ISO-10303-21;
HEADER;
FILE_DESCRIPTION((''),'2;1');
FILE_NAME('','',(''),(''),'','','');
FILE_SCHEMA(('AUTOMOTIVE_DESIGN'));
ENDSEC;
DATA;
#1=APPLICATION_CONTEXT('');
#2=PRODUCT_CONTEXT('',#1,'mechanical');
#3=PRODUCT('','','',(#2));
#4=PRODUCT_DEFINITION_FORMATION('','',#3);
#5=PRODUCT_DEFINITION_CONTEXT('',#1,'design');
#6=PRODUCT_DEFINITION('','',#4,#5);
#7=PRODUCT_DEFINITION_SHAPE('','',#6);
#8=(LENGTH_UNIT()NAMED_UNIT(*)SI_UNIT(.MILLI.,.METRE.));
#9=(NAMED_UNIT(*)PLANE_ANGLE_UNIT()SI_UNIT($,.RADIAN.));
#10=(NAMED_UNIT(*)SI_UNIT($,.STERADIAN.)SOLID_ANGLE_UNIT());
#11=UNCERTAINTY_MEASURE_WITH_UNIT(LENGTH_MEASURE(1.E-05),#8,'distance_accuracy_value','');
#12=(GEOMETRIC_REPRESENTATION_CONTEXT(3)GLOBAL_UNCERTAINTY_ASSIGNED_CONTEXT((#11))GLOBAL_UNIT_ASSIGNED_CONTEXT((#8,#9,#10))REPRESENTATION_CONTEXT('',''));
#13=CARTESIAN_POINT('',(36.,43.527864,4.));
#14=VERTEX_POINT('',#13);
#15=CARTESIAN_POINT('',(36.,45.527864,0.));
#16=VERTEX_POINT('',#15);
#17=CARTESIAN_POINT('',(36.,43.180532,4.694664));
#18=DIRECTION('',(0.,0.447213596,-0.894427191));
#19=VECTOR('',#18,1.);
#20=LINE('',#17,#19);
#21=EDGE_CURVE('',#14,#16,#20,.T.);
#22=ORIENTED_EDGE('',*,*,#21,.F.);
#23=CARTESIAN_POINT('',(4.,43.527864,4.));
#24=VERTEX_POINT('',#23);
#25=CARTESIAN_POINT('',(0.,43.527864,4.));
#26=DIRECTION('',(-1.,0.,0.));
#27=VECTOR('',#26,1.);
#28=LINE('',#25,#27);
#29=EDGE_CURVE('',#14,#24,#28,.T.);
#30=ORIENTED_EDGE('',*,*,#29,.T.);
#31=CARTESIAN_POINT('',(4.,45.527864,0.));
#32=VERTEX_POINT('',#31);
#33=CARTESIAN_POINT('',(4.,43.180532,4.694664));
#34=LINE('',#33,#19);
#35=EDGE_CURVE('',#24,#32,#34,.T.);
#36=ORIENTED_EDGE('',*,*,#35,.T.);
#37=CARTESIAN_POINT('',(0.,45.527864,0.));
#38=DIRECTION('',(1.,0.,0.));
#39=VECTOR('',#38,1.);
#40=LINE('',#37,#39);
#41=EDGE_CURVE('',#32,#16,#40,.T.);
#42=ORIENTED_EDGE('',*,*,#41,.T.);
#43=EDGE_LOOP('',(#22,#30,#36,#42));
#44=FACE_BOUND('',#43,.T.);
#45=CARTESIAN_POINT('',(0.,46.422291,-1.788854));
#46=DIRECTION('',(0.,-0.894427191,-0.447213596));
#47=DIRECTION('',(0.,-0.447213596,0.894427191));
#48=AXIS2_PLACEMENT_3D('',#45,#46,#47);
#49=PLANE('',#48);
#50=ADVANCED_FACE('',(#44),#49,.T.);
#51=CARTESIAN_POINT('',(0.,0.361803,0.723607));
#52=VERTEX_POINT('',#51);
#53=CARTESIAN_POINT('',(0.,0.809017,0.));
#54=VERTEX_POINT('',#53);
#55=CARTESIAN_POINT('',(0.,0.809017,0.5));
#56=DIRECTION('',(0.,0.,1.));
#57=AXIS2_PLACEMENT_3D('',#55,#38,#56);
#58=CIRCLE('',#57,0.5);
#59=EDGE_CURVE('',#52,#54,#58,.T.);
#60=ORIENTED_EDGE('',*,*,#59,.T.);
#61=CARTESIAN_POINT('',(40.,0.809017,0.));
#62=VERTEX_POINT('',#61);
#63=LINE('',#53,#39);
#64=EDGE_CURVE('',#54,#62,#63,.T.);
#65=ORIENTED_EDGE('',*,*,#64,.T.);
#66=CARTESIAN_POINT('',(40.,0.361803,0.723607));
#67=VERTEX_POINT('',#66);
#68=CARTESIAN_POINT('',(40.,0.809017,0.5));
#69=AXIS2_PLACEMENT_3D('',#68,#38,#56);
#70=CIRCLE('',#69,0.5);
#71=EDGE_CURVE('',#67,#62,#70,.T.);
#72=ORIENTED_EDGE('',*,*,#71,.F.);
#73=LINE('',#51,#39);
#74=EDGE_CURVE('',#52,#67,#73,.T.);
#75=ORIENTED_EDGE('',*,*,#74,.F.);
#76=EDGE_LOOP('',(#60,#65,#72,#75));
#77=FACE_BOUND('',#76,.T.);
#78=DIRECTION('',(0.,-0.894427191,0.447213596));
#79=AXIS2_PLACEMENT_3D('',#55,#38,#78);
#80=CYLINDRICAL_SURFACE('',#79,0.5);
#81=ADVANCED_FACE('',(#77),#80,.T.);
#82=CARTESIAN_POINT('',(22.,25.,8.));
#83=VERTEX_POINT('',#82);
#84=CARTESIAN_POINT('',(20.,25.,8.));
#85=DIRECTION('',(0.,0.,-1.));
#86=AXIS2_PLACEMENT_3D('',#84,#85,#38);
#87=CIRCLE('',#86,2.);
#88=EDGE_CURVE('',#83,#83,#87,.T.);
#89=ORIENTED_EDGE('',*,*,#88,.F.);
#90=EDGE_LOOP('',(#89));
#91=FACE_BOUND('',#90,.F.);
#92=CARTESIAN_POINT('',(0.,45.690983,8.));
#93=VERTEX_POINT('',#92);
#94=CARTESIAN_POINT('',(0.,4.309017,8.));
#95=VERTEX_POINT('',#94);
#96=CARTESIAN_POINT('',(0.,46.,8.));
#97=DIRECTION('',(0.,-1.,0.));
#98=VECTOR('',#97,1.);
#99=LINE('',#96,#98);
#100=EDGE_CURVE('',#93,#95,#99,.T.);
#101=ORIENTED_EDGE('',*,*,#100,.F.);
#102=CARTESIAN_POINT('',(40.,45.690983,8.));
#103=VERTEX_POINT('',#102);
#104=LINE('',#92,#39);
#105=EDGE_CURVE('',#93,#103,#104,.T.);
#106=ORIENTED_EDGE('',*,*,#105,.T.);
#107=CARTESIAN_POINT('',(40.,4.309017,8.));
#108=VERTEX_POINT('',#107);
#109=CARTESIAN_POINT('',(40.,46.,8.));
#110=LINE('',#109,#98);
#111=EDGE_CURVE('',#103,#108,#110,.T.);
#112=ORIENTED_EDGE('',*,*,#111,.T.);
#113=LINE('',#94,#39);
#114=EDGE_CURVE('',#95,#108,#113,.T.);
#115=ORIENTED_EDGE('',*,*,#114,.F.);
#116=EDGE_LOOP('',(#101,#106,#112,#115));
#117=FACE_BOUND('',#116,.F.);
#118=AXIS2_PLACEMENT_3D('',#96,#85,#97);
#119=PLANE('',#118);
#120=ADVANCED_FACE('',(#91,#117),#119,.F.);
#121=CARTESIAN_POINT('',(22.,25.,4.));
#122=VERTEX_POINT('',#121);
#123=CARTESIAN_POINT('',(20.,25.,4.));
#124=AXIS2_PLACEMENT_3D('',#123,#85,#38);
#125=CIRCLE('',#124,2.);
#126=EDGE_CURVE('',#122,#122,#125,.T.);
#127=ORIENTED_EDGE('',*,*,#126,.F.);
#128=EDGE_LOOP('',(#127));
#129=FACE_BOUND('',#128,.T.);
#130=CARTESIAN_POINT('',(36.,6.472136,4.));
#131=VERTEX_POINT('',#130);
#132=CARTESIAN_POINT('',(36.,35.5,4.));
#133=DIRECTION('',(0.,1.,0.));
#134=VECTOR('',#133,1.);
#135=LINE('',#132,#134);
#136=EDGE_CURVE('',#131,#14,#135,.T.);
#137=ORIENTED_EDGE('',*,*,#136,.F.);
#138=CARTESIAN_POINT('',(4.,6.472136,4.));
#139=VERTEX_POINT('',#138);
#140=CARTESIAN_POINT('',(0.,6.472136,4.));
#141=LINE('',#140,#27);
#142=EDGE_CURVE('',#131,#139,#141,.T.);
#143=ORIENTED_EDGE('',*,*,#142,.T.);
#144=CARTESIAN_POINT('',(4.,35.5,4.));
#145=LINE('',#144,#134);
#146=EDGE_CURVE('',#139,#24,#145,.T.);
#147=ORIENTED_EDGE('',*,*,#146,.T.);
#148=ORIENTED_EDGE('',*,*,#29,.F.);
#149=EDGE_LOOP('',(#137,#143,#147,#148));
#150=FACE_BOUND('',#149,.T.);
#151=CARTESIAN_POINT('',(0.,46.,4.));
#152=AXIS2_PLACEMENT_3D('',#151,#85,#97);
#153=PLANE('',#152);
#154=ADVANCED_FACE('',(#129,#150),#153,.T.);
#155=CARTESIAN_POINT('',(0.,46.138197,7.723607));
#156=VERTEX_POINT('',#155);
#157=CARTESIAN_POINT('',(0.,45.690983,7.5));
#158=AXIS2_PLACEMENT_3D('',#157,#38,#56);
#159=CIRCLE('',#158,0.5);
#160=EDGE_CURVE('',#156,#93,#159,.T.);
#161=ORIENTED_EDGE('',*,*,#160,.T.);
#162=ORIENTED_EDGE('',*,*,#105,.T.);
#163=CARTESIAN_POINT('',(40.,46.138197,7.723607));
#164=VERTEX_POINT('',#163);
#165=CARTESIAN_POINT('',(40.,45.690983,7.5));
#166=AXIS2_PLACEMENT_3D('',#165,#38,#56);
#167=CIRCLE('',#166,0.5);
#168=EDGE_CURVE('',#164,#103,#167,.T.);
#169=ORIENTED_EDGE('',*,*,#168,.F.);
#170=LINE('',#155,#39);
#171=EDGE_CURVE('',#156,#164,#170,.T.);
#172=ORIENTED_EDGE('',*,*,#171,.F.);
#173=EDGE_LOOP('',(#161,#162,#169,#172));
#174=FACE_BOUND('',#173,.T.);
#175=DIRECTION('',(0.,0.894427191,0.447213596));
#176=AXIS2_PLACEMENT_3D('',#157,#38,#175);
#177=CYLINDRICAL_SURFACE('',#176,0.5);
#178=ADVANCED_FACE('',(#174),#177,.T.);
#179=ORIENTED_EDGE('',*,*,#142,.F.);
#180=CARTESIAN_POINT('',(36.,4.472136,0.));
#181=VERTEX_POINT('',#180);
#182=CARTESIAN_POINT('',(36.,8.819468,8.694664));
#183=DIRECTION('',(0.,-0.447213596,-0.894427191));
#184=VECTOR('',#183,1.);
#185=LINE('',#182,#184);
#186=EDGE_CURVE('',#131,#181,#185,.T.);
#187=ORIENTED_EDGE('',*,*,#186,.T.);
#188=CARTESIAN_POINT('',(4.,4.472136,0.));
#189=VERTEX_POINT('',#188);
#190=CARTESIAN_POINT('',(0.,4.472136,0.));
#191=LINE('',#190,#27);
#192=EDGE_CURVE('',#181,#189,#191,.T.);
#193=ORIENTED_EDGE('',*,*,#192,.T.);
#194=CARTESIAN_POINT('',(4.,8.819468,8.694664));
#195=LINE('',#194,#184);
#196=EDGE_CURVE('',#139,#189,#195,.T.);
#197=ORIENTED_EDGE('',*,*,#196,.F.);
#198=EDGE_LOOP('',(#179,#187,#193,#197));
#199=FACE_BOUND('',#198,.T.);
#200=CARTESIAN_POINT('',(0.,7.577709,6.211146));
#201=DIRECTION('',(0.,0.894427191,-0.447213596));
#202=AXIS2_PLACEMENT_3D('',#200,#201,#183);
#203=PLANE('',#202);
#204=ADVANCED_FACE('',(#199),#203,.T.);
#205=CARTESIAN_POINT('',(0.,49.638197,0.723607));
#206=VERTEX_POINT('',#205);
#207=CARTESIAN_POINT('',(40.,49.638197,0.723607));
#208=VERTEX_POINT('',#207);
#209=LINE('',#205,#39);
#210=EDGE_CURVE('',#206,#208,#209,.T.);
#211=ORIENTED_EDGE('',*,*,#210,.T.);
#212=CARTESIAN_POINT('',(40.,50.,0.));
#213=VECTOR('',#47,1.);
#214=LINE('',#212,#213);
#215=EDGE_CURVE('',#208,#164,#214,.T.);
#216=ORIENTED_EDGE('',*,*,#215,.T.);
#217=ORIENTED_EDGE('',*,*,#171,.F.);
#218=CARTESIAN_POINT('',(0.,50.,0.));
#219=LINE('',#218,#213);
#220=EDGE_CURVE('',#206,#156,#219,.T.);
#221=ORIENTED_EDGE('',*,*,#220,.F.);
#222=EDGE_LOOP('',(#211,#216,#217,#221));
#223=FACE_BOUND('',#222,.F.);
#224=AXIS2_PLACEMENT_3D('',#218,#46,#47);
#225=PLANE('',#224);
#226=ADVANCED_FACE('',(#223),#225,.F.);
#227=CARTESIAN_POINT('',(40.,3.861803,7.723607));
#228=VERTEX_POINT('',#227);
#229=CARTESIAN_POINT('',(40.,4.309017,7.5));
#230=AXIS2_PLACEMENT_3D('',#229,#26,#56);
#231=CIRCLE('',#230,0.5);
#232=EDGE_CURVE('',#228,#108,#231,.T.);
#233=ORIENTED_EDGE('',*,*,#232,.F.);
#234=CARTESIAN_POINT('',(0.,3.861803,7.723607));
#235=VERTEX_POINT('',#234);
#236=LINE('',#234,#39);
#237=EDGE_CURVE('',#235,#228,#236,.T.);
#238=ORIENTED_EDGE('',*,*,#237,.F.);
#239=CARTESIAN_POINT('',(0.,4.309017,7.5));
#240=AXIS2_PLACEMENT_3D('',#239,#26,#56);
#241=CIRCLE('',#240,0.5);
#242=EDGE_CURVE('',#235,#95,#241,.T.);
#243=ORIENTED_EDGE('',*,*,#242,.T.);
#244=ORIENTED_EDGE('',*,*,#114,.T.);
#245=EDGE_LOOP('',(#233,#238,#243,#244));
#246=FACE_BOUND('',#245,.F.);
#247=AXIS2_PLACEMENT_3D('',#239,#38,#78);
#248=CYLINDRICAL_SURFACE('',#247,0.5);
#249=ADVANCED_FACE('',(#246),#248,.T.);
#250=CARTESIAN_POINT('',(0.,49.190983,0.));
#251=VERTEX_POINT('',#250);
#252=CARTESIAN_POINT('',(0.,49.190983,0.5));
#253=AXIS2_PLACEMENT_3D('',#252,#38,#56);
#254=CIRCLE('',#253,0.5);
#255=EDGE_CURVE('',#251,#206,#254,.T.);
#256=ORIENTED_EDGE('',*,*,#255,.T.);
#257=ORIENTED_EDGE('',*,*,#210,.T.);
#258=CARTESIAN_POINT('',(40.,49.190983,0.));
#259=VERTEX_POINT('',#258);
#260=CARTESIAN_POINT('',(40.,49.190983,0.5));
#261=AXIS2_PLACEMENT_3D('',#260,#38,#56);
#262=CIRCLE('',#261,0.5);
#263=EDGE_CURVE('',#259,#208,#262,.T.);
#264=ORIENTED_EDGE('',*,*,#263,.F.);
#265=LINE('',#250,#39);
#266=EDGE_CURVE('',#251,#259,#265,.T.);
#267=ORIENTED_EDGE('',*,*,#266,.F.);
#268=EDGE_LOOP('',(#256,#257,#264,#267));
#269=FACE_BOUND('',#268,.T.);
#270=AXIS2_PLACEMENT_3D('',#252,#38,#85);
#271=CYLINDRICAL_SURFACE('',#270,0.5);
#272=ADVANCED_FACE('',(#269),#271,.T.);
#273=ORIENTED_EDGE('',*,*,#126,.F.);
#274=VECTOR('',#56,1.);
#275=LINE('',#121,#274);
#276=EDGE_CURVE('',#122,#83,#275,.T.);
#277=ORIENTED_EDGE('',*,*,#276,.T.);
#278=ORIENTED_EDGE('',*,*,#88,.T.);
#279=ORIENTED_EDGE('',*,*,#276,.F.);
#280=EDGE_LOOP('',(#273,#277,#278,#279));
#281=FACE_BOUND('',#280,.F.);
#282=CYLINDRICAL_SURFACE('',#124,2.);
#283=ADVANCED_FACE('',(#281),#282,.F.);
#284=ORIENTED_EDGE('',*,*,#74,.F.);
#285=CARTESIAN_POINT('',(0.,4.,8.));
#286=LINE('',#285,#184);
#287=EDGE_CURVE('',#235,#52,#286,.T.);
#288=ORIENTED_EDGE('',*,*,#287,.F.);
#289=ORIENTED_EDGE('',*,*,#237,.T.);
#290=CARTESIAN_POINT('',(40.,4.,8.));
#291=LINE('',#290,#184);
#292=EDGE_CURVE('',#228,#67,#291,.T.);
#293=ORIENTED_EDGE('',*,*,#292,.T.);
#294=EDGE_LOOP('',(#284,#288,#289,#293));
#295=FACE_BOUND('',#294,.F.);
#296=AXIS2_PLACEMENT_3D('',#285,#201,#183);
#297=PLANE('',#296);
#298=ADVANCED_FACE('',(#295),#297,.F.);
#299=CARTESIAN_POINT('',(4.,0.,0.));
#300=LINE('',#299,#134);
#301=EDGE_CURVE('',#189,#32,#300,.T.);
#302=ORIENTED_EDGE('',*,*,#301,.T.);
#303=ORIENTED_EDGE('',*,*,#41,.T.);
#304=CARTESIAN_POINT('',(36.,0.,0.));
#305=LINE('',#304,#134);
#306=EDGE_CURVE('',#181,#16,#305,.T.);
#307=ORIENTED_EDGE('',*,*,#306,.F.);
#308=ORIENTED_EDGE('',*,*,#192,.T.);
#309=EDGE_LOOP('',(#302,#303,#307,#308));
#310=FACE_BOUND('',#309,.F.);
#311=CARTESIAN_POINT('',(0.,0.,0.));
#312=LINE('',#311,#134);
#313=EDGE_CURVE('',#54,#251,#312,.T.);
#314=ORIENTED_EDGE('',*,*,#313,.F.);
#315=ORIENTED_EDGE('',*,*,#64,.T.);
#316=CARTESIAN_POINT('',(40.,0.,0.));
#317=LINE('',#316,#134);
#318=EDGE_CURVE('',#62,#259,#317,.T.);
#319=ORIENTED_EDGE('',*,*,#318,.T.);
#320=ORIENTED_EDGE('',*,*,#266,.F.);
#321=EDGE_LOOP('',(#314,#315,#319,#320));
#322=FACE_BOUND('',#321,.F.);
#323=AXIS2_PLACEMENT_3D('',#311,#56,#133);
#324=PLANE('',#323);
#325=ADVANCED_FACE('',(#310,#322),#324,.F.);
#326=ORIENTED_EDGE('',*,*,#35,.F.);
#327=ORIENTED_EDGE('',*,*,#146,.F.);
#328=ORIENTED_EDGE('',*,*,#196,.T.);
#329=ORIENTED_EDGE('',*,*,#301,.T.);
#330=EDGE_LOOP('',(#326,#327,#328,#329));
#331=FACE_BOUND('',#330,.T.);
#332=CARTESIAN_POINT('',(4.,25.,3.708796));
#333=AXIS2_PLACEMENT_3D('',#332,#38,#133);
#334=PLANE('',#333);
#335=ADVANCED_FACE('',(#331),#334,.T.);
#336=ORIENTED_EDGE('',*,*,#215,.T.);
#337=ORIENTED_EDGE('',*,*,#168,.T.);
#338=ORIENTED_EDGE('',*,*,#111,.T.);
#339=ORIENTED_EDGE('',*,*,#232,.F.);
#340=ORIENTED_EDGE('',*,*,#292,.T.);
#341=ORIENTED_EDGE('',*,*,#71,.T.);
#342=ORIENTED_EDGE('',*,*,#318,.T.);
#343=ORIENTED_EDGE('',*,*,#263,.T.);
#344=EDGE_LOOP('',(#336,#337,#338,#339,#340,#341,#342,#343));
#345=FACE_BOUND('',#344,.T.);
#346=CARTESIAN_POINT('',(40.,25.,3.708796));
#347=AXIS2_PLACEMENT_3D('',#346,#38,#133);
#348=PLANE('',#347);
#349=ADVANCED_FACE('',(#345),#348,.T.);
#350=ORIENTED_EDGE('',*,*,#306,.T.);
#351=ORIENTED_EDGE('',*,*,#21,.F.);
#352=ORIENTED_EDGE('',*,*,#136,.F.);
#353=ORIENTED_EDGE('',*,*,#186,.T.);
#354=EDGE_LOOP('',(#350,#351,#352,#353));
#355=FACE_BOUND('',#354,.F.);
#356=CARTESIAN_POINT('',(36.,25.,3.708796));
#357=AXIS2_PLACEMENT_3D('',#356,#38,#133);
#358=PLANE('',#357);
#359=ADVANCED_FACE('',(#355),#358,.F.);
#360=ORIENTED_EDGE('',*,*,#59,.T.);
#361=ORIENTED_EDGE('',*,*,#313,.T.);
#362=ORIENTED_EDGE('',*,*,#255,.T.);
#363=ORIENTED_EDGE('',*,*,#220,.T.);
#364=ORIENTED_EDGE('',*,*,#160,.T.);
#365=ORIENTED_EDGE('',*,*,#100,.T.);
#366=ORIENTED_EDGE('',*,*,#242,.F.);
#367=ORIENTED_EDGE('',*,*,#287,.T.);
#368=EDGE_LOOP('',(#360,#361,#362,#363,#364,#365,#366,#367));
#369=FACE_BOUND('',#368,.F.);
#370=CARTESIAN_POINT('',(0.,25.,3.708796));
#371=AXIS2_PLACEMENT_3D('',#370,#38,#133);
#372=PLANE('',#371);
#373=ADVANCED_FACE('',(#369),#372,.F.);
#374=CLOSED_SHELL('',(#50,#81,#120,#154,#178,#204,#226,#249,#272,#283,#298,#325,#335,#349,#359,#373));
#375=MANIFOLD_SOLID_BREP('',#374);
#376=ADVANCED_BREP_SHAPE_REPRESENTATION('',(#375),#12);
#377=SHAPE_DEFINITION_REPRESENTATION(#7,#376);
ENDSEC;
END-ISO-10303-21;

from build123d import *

# Parameters (mm, degrees)
F1_DEPTH = 40
F2_R     = 0.5
F3_T     = 4
F4_R     = 2
F5_DEPTH = 4


# Not quite as in the source:
# - a shell that OpenCascade refuses in one call is made with other operations: the cavity is built on its own and cut out


with BuildPart() as f1:
    # F0 (on Right) → F1 (new body)
    with BuildSketch(Plane.YZ):
        Polygon((4, 8), (0, 0), (50, 0), (46, 8), align=None)
    extrude(amount=F1_DEPTH)

    # F2
    f2_edges = [f1.edges().sort_by_distance(p)[0] for p in [
        (20, 4, 8),
        (20, 46, 8),
        (20, 0, 0),
        (20, 50, 0),
    ]]
    fillet(f2_edges, radius=F2_R)

    # F3: shell of thickness 4, made by hand


with BuildPart() as f3_core1:
    # F3_t2: copy of F1
    add(f1.part)

    # the walls: a layer under each face that stays
    f3_faces = [f3_core1.faces().sort_by_distance(p)[0] for p in [
        (20, 2.1118033989, 4.2236067977),
        (0, 25, 4),
        (40, 25, 4),
        (20, 25, 8),
        (20, 47.8881966011, 4.2236067977),
    ]]
    thicken(f3_faces, amount=-F3_T, mode=Mode.SUBTRACT)


with BuildPart() as f1_1:
    add(f1.part)

    # what is left inside the walls is the cavity
    f3_cavity = [f3_core1.part.solids().sort_by_distance(p)[0] for p in [
        (25.333333, 25, 0.04),
    ]]
    add(f3_cavity, mode=Mode.SUBTRACT)

    # F4 (on face) → F5 (cut, through all)
    with BuildSketch(Plane(origin=(0, 0, 4), x_dir=(1, 0, 0), z_dir=(0, 0, -1))):
        with Locations((20, -25)):
            Circle(F4_R)
    extrude(amount=-F5_DEPTH, mode=Mode.SUBTRACT)


solid = f1_1.part
